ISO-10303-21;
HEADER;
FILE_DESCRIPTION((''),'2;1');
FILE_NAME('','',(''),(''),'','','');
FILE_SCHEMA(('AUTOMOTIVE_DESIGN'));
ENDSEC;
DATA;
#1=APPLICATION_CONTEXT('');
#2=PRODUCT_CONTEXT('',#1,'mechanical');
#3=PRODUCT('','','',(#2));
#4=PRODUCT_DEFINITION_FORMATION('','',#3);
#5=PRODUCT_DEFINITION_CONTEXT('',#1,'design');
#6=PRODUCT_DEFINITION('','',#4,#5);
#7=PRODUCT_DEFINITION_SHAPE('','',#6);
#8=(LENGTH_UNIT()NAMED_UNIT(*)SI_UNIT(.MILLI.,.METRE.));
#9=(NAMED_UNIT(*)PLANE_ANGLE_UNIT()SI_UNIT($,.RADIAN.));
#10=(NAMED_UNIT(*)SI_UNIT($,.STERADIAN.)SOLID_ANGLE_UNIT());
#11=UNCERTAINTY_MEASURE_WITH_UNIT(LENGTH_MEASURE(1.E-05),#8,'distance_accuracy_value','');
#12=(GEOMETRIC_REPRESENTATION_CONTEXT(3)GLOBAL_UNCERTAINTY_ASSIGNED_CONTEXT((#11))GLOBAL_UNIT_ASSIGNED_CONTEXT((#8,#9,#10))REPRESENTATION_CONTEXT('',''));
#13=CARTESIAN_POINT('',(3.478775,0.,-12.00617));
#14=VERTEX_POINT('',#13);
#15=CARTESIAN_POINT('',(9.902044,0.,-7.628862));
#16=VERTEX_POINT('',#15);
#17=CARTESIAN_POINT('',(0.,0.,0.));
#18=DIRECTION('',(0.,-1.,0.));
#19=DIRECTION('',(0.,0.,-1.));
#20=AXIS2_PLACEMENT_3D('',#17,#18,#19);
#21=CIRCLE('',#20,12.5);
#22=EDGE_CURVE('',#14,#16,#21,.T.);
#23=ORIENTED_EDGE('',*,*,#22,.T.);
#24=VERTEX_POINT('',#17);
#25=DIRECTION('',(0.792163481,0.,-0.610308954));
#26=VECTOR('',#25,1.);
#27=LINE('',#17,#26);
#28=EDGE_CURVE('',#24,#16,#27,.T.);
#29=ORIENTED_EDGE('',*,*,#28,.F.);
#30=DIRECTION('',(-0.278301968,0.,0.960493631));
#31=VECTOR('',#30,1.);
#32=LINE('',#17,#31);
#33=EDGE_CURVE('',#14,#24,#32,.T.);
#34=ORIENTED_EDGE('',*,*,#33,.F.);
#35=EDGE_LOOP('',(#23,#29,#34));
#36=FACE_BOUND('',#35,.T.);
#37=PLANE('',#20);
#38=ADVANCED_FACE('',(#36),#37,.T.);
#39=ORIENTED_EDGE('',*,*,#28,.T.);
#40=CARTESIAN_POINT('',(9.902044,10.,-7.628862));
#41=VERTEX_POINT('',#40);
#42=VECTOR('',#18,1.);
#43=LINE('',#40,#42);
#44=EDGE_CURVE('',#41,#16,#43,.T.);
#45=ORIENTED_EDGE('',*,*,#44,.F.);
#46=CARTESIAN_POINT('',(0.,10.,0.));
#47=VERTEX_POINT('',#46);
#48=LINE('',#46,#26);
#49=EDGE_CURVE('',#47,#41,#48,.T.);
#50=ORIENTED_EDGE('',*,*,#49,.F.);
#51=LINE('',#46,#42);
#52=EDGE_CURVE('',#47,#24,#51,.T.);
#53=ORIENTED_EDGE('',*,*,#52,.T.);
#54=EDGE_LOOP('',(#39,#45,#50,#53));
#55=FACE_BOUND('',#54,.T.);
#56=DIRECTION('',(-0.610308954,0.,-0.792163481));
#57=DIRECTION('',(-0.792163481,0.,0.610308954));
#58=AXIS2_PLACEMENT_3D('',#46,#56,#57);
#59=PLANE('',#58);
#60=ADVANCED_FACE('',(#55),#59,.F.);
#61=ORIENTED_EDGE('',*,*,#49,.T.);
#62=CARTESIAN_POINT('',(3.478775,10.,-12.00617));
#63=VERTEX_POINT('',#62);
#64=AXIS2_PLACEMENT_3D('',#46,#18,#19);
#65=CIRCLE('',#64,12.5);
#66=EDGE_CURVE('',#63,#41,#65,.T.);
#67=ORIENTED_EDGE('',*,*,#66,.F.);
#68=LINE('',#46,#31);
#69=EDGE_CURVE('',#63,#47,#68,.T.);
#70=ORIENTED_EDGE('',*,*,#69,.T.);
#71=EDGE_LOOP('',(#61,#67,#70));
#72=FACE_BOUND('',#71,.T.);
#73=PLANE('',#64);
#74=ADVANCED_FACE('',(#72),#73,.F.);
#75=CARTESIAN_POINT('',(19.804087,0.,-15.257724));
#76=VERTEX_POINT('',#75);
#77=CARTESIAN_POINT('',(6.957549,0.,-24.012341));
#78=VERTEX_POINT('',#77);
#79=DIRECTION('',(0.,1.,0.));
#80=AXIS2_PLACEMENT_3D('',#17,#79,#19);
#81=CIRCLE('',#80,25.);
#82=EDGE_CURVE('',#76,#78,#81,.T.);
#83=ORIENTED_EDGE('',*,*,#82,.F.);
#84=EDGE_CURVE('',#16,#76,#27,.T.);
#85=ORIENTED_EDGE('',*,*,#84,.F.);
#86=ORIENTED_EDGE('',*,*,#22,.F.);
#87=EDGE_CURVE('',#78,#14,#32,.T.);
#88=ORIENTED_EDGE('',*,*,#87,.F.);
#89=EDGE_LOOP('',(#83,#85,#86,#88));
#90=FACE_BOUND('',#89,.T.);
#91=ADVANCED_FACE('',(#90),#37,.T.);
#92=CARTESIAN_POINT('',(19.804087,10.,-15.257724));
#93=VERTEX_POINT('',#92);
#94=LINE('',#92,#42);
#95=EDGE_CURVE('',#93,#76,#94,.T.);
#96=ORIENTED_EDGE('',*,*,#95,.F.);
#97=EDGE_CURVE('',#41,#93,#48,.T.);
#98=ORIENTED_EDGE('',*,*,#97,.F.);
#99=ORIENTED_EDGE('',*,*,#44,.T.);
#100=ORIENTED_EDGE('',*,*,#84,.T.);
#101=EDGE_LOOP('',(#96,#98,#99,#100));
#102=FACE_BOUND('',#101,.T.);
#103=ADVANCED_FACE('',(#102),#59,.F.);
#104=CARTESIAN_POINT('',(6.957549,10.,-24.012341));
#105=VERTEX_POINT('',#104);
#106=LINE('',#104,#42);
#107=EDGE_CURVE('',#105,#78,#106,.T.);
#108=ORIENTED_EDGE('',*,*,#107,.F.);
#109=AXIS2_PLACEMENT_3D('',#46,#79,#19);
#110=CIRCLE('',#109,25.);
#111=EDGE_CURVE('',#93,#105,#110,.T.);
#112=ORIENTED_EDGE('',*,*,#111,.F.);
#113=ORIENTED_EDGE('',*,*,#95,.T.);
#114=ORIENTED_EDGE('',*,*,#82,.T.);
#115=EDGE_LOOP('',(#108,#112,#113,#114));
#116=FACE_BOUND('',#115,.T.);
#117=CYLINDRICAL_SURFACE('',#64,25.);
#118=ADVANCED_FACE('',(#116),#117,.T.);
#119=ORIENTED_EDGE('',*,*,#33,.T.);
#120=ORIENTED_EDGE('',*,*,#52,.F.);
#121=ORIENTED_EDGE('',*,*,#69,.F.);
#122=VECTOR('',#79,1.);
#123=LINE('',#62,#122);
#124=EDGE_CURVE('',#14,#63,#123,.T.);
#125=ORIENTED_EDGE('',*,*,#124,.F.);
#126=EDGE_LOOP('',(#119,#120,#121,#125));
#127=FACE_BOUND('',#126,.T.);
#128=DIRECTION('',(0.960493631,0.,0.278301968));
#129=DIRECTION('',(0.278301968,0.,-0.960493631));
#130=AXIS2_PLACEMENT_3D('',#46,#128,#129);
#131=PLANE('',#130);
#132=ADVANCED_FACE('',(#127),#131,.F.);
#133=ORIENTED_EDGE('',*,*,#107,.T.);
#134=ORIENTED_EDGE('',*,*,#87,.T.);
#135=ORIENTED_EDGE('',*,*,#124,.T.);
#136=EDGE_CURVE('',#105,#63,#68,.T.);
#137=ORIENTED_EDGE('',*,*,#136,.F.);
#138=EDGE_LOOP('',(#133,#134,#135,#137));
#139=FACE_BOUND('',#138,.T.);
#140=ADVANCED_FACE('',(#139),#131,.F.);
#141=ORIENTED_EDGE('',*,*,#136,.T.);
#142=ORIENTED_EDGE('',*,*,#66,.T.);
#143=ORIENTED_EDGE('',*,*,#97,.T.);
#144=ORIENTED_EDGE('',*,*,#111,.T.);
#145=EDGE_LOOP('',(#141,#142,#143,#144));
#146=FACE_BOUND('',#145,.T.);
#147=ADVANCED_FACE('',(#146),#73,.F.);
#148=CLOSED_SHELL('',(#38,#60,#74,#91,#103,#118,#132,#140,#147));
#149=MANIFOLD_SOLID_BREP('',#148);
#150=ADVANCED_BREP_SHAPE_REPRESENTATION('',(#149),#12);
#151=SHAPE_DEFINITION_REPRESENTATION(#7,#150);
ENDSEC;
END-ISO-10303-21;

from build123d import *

# Parameters (mm, degrees)
BASE_FLANGE1_DEPTH = 10


# Sheet-metal steps are written as plain solids
with BuildPart() as part:
    # Sketch2 → Base-Flange1 (new body)
    with BuildSketch(Plane(origin=(0, 0, 0), x_dir=(1, 0, 0), z_dir=(0, 1, 0))):
        with BuildLine():
            Line((0, 0), (6.957549204, 24.012340766))
            ThreePointArc((6.957549204, 24.012340766), (14.078605139, 20.658966028), (19.80408702, 15.257723857))
            Line((19.80408702, 15.257723857), (0, 0))
        make_face()
    extrude(amount=BASE_FLANGE1_DEPTH)


solid = part.part
